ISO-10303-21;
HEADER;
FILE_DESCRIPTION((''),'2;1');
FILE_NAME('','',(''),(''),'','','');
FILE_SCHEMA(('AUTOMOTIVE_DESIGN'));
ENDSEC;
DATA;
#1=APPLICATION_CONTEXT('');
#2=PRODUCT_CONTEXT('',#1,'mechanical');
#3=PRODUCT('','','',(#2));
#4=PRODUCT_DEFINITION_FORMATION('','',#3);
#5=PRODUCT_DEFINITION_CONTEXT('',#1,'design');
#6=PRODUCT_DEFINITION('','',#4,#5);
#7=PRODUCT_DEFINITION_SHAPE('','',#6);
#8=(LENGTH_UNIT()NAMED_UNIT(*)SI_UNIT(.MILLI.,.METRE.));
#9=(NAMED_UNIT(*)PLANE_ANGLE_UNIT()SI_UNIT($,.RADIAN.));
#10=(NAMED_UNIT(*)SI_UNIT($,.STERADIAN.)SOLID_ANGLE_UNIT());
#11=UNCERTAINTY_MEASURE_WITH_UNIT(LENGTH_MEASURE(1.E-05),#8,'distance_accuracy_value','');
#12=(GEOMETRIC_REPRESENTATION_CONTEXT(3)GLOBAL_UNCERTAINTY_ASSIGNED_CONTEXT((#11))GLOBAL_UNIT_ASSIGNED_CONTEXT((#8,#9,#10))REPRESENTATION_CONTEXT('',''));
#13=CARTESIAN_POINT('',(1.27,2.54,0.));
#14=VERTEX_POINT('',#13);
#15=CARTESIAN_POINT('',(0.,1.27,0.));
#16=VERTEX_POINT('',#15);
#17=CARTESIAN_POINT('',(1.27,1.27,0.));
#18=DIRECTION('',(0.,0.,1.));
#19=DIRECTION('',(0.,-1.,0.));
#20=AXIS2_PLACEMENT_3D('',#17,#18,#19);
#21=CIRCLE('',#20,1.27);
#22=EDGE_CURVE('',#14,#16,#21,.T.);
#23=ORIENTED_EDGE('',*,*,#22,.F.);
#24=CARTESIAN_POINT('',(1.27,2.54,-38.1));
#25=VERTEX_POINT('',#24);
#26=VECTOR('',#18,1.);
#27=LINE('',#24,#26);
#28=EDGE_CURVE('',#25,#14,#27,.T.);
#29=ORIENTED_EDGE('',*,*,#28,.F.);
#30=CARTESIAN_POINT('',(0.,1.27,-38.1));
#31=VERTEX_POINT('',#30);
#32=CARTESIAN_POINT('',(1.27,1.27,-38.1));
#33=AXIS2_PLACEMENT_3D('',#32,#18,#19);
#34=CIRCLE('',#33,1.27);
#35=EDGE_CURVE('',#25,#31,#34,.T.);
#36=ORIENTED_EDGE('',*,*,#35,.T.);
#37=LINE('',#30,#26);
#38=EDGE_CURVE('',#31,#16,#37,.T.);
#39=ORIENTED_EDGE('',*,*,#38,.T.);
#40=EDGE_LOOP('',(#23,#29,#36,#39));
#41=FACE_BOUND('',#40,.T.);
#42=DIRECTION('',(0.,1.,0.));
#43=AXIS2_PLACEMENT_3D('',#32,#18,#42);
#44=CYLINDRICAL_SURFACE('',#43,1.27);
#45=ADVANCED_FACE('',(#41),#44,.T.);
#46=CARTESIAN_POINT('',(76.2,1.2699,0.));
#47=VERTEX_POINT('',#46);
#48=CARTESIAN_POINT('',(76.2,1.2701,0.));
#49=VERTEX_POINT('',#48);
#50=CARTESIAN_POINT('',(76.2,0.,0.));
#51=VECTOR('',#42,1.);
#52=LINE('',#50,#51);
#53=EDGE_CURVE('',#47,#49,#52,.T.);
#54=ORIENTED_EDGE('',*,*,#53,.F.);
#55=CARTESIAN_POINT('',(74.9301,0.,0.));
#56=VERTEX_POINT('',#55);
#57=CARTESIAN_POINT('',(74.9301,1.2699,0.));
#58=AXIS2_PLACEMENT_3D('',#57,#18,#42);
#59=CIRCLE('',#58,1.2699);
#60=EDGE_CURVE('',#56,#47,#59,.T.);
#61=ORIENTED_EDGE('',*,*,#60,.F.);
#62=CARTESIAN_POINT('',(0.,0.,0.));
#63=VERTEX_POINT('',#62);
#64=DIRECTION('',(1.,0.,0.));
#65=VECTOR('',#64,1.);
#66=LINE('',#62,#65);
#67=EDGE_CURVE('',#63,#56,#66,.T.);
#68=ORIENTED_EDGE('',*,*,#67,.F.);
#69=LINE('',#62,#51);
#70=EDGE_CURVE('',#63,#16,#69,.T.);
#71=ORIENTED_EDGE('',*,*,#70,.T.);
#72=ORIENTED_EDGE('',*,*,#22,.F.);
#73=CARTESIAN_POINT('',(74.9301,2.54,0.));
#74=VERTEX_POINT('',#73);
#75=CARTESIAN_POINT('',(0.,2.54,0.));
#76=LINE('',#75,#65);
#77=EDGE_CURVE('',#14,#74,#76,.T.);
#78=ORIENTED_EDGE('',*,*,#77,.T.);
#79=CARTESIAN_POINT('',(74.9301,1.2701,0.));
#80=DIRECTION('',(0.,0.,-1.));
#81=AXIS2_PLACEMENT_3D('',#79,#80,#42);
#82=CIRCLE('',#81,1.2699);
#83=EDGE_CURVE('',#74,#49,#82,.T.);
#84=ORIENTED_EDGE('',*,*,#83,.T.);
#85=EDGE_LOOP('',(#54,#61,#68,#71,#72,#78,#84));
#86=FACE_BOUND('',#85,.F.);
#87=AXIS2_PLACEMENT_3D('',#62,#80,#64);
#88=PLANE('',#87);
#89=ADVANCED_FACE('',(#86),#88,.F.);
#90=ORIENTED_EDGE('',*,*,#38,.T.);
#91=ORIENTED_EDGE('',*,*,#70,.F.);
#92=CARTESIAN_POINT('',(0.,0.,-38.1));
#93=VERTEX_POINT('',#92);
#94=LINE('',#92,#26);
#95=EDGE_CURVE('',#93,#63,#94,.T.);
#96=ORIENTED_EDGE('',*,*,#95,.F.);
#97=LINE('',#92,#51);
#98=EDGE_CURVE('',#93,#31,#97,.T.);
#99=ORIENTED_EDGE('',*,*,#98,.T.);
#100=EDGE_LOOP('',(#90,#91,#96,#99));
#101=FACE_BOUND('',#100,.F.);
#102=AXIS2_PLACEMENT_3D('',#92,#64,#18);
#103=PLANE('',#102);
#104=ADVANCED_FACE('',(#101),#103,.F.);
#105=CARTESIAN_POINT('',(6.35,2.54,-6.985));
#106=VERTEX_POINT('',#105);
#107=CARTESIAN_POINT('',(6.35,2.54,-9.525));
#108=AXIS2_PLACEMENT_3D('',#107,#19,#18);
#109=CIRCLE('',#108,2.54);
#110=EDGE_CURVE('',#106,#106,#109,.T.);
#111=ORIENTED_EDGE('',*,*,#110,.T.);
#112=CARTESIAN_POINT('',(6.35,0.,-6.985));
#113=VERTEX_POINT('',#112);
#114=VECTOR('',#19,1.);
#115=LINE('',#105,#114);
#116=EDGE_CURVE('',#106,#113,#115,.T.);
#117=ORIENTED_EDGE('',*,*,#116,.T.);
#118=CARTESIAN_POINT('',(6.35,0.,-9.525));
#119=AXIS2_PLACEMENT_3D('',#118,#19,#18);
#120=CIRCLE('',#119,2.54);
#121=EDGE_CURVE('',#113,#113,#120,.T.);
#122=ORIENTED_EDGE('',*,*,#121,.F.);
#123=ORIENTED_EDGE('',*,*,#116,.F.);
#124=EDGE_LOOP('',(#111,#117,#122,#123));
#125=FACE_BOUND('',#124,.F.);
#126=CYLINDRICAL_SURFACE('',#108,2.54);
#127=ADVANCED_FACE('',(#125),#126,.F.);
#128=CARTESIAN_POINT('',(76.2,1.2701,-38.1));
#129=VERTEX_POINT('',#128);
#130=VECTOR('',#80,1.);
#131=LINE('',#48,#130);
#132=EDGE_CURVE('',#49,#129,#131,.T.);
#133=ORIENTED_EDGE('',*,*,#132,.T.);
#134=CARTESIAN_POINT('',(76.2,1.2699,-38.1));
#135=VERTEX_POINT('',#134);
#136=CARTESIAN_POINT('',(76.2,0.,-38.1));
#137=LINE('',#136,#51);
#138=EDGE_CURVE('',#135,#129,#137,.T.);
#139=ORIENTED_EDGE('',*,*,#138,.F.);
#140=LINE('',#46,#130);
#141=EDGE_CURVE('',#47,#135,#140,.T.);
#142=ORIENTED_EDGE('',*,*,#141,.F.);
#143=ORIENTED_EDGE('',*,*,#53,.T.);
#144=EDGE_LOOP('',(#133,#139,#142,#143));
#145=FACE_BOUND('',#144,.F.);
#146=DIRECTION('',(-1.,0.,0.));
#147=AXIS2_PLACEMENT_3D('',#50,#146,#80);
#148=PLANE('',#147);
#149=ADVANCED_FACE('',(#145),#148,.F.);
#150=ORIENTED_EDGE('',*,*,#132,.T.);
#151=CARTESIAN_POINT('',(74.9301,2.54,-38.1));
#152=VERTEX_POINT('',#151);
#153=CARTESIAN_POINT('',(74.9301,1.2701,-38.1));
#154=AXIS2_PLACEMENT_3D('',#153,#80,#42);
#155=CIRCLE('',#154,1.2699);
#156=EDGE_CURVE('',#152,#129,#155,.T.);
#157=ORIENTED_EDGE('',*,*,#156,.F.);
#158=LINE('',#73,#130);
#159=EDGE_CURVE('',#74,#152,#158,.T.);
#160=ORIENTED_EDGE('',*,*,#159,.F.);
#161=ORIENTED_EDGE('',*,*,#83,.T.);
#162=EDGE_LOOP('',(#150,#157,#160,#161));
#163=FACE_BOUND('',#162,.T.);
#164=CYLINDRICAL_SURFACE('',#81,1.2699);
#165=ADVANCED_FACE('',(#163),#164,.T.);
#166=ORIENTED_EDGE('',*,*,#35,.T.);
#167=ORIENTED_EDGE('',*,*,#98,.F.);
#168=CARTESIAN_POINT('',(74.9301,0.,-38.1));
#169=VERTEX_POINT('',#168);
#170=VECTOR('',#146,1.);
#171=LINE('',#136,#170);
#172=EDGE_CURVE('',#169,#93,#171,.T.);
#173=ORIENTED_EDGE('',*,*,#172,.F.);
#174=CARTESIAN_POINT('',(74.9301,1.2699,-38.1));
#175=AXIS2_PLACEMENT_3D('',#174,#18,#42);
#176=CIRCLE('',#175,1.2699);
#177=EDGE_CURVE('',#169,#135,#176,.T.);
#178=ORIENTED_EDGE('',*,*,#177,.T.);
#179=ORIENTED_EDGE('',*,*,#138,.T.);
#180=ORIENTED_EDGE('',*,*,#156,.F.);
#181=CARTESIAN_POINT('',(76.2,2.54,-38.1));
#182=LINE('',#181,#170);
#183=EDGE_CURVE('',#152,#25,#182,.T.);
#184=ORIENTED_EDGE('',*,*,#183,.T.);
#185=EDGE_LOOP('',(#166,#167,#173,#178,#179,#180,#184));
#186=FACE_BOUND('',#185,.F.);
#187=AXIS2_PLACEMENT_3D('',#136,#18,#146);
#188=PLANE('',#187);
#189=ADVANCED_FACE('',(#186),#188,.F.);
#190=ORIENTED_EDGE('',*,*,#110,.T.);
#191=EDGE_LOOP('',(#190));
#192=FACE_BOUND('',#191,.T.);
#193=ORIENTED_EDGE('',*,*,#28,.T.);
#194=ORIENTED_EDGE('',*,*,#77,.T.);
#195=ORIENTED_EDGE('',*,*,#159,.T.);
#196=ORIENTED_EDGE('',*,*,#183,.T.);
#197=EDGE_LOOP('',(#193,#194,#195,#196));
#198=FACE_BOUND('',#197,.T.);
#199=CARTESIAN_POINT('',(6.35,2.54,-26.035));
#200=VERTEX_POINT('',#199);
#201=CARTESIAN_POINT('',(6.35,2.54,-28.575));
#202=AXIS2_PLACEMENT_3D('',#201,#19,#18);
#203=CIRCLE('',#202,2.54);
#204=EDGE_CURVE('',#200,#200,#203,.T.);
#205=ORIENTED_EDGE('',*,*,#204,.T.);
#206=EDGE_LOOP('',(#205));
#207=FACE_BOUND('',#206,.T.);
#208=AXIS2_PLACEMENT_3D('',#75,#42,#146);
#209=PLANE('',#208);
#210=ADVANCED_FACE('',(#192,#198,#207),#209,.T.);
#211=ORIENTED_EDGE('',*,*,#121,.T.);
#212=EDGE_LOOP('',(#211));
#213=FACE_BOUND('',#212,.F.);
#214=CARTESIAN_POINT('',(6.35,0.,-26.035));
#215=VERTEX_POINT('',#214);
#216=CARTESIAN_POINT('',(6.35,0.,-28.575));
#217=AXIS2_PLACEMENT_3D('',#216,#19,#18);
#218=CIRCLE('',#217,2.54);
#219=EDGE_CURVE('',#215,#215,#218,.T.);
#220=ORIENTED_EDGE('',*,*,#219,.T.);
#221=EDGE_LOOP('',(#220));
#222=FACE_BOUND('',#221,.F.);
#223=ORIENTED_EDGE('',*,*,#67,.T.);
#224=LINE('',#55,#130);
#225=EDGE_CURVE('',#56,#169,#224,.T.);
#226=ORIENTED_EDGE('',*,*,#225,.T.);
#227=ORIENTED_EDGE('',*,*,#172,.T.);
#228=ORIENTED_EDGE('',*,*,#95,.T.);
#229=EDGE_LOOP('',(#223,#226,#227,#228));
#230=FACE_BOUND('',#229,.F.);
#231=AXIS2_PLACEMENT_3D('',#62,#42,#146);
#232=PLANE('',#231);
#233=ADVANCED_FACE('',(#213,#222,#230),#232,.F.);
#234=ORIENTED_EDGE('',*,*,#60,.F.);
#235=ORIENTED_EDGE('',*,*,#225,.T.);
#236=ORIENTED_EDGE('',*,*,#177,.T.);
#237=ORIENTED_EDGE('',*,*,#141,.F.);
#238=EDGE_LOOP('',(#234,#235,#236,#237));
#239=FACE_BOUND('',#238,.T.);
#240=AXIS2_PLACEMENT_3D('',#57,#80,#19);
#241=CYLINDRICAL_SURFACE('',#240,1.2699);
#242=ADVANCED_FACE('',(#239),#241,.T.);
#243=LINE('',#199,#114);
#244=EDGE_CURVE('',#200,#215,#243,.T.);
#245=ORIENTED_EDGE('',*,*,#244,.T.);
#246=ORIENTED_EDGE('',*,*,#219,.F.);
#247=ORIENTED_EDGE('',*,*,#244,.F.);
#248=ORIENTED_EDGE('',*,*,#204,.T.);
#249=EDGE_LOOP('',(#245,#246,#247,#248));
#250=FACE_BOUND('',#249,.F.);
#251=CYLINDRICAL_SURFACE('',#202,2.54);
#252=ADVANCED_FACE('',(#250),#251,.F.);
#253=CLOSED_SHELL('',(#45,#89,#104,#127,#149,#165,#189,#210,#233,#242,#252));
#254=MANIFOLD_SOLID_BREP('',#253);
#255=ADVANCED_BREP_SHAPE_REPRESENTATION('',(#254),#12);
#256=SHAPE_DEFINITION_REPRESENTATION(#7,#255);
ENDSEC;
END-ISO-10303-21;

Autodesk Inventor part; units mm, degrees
ref_plane "YZ Plane" through (0, 0, 0) normal (1, 0, 0) x (0, 1, 0)
ref_plane "XZ Plane" through (0, 0, 0) normal (0, 1, 0) x (-1, 0, 0)
ref_plane "XY Plane" through (0, 0, 0) normal (0, 0, 1) x (1, 0, 0)
sketch "Sketch1" plane through (0, 0, 0) normal (0, 1, 0) x (-1, 0, 0)
  line L0 (0, 0) -> (-76.2, 0)
  line L1 (-76.2, 0) -> (-76.2, -38.1)
  line L2 (-76.2, -38.1) -> (0, -38.1)
  line L3 (0, -38.1) -> (0, 0)
  dimension "d0" = 76.2
  dimension "d1" = 38.1
extrude "Extrusion1" add sketch "Sketch1" along normal blind 2.54
sketch "Sketch2" plane through (0, 2.54, 0) normal (0, 1, 0) x (1, 0, 0)
  line L0 (0, 0) -> (6.35, 0)
  line L1 (0, 0) -> (76.2, 0) projected
  line L2 (6.35, 0) -> (6.35, 38.1)
  line L3 (76.2, 38.1) -> (0, 38.1) projected
  line L4 (6.35, 0) -> (6.35, 9.525)
  line L5 (6.35, 38.1) -> (6.35, 28.575)
  dimension "d4" = 6.35
  dimension "d5" = 9.525
  dimension "d6" = 9.525
hole "Hole1" at (6.35, 2.54, -9.525) at (6.35, 2.54, -28.575) direction (0, -1, 0) diameter 5.08 end through all
fillet "Fillet1" radius 1.27 2 edges at (76.2, 2.54, -19.05) (76.2, 0, -19.05)
fillet "Fillet2" radius 1.27 1 edges at (0, 2.54, -19.05)
properties part number "Cover"
